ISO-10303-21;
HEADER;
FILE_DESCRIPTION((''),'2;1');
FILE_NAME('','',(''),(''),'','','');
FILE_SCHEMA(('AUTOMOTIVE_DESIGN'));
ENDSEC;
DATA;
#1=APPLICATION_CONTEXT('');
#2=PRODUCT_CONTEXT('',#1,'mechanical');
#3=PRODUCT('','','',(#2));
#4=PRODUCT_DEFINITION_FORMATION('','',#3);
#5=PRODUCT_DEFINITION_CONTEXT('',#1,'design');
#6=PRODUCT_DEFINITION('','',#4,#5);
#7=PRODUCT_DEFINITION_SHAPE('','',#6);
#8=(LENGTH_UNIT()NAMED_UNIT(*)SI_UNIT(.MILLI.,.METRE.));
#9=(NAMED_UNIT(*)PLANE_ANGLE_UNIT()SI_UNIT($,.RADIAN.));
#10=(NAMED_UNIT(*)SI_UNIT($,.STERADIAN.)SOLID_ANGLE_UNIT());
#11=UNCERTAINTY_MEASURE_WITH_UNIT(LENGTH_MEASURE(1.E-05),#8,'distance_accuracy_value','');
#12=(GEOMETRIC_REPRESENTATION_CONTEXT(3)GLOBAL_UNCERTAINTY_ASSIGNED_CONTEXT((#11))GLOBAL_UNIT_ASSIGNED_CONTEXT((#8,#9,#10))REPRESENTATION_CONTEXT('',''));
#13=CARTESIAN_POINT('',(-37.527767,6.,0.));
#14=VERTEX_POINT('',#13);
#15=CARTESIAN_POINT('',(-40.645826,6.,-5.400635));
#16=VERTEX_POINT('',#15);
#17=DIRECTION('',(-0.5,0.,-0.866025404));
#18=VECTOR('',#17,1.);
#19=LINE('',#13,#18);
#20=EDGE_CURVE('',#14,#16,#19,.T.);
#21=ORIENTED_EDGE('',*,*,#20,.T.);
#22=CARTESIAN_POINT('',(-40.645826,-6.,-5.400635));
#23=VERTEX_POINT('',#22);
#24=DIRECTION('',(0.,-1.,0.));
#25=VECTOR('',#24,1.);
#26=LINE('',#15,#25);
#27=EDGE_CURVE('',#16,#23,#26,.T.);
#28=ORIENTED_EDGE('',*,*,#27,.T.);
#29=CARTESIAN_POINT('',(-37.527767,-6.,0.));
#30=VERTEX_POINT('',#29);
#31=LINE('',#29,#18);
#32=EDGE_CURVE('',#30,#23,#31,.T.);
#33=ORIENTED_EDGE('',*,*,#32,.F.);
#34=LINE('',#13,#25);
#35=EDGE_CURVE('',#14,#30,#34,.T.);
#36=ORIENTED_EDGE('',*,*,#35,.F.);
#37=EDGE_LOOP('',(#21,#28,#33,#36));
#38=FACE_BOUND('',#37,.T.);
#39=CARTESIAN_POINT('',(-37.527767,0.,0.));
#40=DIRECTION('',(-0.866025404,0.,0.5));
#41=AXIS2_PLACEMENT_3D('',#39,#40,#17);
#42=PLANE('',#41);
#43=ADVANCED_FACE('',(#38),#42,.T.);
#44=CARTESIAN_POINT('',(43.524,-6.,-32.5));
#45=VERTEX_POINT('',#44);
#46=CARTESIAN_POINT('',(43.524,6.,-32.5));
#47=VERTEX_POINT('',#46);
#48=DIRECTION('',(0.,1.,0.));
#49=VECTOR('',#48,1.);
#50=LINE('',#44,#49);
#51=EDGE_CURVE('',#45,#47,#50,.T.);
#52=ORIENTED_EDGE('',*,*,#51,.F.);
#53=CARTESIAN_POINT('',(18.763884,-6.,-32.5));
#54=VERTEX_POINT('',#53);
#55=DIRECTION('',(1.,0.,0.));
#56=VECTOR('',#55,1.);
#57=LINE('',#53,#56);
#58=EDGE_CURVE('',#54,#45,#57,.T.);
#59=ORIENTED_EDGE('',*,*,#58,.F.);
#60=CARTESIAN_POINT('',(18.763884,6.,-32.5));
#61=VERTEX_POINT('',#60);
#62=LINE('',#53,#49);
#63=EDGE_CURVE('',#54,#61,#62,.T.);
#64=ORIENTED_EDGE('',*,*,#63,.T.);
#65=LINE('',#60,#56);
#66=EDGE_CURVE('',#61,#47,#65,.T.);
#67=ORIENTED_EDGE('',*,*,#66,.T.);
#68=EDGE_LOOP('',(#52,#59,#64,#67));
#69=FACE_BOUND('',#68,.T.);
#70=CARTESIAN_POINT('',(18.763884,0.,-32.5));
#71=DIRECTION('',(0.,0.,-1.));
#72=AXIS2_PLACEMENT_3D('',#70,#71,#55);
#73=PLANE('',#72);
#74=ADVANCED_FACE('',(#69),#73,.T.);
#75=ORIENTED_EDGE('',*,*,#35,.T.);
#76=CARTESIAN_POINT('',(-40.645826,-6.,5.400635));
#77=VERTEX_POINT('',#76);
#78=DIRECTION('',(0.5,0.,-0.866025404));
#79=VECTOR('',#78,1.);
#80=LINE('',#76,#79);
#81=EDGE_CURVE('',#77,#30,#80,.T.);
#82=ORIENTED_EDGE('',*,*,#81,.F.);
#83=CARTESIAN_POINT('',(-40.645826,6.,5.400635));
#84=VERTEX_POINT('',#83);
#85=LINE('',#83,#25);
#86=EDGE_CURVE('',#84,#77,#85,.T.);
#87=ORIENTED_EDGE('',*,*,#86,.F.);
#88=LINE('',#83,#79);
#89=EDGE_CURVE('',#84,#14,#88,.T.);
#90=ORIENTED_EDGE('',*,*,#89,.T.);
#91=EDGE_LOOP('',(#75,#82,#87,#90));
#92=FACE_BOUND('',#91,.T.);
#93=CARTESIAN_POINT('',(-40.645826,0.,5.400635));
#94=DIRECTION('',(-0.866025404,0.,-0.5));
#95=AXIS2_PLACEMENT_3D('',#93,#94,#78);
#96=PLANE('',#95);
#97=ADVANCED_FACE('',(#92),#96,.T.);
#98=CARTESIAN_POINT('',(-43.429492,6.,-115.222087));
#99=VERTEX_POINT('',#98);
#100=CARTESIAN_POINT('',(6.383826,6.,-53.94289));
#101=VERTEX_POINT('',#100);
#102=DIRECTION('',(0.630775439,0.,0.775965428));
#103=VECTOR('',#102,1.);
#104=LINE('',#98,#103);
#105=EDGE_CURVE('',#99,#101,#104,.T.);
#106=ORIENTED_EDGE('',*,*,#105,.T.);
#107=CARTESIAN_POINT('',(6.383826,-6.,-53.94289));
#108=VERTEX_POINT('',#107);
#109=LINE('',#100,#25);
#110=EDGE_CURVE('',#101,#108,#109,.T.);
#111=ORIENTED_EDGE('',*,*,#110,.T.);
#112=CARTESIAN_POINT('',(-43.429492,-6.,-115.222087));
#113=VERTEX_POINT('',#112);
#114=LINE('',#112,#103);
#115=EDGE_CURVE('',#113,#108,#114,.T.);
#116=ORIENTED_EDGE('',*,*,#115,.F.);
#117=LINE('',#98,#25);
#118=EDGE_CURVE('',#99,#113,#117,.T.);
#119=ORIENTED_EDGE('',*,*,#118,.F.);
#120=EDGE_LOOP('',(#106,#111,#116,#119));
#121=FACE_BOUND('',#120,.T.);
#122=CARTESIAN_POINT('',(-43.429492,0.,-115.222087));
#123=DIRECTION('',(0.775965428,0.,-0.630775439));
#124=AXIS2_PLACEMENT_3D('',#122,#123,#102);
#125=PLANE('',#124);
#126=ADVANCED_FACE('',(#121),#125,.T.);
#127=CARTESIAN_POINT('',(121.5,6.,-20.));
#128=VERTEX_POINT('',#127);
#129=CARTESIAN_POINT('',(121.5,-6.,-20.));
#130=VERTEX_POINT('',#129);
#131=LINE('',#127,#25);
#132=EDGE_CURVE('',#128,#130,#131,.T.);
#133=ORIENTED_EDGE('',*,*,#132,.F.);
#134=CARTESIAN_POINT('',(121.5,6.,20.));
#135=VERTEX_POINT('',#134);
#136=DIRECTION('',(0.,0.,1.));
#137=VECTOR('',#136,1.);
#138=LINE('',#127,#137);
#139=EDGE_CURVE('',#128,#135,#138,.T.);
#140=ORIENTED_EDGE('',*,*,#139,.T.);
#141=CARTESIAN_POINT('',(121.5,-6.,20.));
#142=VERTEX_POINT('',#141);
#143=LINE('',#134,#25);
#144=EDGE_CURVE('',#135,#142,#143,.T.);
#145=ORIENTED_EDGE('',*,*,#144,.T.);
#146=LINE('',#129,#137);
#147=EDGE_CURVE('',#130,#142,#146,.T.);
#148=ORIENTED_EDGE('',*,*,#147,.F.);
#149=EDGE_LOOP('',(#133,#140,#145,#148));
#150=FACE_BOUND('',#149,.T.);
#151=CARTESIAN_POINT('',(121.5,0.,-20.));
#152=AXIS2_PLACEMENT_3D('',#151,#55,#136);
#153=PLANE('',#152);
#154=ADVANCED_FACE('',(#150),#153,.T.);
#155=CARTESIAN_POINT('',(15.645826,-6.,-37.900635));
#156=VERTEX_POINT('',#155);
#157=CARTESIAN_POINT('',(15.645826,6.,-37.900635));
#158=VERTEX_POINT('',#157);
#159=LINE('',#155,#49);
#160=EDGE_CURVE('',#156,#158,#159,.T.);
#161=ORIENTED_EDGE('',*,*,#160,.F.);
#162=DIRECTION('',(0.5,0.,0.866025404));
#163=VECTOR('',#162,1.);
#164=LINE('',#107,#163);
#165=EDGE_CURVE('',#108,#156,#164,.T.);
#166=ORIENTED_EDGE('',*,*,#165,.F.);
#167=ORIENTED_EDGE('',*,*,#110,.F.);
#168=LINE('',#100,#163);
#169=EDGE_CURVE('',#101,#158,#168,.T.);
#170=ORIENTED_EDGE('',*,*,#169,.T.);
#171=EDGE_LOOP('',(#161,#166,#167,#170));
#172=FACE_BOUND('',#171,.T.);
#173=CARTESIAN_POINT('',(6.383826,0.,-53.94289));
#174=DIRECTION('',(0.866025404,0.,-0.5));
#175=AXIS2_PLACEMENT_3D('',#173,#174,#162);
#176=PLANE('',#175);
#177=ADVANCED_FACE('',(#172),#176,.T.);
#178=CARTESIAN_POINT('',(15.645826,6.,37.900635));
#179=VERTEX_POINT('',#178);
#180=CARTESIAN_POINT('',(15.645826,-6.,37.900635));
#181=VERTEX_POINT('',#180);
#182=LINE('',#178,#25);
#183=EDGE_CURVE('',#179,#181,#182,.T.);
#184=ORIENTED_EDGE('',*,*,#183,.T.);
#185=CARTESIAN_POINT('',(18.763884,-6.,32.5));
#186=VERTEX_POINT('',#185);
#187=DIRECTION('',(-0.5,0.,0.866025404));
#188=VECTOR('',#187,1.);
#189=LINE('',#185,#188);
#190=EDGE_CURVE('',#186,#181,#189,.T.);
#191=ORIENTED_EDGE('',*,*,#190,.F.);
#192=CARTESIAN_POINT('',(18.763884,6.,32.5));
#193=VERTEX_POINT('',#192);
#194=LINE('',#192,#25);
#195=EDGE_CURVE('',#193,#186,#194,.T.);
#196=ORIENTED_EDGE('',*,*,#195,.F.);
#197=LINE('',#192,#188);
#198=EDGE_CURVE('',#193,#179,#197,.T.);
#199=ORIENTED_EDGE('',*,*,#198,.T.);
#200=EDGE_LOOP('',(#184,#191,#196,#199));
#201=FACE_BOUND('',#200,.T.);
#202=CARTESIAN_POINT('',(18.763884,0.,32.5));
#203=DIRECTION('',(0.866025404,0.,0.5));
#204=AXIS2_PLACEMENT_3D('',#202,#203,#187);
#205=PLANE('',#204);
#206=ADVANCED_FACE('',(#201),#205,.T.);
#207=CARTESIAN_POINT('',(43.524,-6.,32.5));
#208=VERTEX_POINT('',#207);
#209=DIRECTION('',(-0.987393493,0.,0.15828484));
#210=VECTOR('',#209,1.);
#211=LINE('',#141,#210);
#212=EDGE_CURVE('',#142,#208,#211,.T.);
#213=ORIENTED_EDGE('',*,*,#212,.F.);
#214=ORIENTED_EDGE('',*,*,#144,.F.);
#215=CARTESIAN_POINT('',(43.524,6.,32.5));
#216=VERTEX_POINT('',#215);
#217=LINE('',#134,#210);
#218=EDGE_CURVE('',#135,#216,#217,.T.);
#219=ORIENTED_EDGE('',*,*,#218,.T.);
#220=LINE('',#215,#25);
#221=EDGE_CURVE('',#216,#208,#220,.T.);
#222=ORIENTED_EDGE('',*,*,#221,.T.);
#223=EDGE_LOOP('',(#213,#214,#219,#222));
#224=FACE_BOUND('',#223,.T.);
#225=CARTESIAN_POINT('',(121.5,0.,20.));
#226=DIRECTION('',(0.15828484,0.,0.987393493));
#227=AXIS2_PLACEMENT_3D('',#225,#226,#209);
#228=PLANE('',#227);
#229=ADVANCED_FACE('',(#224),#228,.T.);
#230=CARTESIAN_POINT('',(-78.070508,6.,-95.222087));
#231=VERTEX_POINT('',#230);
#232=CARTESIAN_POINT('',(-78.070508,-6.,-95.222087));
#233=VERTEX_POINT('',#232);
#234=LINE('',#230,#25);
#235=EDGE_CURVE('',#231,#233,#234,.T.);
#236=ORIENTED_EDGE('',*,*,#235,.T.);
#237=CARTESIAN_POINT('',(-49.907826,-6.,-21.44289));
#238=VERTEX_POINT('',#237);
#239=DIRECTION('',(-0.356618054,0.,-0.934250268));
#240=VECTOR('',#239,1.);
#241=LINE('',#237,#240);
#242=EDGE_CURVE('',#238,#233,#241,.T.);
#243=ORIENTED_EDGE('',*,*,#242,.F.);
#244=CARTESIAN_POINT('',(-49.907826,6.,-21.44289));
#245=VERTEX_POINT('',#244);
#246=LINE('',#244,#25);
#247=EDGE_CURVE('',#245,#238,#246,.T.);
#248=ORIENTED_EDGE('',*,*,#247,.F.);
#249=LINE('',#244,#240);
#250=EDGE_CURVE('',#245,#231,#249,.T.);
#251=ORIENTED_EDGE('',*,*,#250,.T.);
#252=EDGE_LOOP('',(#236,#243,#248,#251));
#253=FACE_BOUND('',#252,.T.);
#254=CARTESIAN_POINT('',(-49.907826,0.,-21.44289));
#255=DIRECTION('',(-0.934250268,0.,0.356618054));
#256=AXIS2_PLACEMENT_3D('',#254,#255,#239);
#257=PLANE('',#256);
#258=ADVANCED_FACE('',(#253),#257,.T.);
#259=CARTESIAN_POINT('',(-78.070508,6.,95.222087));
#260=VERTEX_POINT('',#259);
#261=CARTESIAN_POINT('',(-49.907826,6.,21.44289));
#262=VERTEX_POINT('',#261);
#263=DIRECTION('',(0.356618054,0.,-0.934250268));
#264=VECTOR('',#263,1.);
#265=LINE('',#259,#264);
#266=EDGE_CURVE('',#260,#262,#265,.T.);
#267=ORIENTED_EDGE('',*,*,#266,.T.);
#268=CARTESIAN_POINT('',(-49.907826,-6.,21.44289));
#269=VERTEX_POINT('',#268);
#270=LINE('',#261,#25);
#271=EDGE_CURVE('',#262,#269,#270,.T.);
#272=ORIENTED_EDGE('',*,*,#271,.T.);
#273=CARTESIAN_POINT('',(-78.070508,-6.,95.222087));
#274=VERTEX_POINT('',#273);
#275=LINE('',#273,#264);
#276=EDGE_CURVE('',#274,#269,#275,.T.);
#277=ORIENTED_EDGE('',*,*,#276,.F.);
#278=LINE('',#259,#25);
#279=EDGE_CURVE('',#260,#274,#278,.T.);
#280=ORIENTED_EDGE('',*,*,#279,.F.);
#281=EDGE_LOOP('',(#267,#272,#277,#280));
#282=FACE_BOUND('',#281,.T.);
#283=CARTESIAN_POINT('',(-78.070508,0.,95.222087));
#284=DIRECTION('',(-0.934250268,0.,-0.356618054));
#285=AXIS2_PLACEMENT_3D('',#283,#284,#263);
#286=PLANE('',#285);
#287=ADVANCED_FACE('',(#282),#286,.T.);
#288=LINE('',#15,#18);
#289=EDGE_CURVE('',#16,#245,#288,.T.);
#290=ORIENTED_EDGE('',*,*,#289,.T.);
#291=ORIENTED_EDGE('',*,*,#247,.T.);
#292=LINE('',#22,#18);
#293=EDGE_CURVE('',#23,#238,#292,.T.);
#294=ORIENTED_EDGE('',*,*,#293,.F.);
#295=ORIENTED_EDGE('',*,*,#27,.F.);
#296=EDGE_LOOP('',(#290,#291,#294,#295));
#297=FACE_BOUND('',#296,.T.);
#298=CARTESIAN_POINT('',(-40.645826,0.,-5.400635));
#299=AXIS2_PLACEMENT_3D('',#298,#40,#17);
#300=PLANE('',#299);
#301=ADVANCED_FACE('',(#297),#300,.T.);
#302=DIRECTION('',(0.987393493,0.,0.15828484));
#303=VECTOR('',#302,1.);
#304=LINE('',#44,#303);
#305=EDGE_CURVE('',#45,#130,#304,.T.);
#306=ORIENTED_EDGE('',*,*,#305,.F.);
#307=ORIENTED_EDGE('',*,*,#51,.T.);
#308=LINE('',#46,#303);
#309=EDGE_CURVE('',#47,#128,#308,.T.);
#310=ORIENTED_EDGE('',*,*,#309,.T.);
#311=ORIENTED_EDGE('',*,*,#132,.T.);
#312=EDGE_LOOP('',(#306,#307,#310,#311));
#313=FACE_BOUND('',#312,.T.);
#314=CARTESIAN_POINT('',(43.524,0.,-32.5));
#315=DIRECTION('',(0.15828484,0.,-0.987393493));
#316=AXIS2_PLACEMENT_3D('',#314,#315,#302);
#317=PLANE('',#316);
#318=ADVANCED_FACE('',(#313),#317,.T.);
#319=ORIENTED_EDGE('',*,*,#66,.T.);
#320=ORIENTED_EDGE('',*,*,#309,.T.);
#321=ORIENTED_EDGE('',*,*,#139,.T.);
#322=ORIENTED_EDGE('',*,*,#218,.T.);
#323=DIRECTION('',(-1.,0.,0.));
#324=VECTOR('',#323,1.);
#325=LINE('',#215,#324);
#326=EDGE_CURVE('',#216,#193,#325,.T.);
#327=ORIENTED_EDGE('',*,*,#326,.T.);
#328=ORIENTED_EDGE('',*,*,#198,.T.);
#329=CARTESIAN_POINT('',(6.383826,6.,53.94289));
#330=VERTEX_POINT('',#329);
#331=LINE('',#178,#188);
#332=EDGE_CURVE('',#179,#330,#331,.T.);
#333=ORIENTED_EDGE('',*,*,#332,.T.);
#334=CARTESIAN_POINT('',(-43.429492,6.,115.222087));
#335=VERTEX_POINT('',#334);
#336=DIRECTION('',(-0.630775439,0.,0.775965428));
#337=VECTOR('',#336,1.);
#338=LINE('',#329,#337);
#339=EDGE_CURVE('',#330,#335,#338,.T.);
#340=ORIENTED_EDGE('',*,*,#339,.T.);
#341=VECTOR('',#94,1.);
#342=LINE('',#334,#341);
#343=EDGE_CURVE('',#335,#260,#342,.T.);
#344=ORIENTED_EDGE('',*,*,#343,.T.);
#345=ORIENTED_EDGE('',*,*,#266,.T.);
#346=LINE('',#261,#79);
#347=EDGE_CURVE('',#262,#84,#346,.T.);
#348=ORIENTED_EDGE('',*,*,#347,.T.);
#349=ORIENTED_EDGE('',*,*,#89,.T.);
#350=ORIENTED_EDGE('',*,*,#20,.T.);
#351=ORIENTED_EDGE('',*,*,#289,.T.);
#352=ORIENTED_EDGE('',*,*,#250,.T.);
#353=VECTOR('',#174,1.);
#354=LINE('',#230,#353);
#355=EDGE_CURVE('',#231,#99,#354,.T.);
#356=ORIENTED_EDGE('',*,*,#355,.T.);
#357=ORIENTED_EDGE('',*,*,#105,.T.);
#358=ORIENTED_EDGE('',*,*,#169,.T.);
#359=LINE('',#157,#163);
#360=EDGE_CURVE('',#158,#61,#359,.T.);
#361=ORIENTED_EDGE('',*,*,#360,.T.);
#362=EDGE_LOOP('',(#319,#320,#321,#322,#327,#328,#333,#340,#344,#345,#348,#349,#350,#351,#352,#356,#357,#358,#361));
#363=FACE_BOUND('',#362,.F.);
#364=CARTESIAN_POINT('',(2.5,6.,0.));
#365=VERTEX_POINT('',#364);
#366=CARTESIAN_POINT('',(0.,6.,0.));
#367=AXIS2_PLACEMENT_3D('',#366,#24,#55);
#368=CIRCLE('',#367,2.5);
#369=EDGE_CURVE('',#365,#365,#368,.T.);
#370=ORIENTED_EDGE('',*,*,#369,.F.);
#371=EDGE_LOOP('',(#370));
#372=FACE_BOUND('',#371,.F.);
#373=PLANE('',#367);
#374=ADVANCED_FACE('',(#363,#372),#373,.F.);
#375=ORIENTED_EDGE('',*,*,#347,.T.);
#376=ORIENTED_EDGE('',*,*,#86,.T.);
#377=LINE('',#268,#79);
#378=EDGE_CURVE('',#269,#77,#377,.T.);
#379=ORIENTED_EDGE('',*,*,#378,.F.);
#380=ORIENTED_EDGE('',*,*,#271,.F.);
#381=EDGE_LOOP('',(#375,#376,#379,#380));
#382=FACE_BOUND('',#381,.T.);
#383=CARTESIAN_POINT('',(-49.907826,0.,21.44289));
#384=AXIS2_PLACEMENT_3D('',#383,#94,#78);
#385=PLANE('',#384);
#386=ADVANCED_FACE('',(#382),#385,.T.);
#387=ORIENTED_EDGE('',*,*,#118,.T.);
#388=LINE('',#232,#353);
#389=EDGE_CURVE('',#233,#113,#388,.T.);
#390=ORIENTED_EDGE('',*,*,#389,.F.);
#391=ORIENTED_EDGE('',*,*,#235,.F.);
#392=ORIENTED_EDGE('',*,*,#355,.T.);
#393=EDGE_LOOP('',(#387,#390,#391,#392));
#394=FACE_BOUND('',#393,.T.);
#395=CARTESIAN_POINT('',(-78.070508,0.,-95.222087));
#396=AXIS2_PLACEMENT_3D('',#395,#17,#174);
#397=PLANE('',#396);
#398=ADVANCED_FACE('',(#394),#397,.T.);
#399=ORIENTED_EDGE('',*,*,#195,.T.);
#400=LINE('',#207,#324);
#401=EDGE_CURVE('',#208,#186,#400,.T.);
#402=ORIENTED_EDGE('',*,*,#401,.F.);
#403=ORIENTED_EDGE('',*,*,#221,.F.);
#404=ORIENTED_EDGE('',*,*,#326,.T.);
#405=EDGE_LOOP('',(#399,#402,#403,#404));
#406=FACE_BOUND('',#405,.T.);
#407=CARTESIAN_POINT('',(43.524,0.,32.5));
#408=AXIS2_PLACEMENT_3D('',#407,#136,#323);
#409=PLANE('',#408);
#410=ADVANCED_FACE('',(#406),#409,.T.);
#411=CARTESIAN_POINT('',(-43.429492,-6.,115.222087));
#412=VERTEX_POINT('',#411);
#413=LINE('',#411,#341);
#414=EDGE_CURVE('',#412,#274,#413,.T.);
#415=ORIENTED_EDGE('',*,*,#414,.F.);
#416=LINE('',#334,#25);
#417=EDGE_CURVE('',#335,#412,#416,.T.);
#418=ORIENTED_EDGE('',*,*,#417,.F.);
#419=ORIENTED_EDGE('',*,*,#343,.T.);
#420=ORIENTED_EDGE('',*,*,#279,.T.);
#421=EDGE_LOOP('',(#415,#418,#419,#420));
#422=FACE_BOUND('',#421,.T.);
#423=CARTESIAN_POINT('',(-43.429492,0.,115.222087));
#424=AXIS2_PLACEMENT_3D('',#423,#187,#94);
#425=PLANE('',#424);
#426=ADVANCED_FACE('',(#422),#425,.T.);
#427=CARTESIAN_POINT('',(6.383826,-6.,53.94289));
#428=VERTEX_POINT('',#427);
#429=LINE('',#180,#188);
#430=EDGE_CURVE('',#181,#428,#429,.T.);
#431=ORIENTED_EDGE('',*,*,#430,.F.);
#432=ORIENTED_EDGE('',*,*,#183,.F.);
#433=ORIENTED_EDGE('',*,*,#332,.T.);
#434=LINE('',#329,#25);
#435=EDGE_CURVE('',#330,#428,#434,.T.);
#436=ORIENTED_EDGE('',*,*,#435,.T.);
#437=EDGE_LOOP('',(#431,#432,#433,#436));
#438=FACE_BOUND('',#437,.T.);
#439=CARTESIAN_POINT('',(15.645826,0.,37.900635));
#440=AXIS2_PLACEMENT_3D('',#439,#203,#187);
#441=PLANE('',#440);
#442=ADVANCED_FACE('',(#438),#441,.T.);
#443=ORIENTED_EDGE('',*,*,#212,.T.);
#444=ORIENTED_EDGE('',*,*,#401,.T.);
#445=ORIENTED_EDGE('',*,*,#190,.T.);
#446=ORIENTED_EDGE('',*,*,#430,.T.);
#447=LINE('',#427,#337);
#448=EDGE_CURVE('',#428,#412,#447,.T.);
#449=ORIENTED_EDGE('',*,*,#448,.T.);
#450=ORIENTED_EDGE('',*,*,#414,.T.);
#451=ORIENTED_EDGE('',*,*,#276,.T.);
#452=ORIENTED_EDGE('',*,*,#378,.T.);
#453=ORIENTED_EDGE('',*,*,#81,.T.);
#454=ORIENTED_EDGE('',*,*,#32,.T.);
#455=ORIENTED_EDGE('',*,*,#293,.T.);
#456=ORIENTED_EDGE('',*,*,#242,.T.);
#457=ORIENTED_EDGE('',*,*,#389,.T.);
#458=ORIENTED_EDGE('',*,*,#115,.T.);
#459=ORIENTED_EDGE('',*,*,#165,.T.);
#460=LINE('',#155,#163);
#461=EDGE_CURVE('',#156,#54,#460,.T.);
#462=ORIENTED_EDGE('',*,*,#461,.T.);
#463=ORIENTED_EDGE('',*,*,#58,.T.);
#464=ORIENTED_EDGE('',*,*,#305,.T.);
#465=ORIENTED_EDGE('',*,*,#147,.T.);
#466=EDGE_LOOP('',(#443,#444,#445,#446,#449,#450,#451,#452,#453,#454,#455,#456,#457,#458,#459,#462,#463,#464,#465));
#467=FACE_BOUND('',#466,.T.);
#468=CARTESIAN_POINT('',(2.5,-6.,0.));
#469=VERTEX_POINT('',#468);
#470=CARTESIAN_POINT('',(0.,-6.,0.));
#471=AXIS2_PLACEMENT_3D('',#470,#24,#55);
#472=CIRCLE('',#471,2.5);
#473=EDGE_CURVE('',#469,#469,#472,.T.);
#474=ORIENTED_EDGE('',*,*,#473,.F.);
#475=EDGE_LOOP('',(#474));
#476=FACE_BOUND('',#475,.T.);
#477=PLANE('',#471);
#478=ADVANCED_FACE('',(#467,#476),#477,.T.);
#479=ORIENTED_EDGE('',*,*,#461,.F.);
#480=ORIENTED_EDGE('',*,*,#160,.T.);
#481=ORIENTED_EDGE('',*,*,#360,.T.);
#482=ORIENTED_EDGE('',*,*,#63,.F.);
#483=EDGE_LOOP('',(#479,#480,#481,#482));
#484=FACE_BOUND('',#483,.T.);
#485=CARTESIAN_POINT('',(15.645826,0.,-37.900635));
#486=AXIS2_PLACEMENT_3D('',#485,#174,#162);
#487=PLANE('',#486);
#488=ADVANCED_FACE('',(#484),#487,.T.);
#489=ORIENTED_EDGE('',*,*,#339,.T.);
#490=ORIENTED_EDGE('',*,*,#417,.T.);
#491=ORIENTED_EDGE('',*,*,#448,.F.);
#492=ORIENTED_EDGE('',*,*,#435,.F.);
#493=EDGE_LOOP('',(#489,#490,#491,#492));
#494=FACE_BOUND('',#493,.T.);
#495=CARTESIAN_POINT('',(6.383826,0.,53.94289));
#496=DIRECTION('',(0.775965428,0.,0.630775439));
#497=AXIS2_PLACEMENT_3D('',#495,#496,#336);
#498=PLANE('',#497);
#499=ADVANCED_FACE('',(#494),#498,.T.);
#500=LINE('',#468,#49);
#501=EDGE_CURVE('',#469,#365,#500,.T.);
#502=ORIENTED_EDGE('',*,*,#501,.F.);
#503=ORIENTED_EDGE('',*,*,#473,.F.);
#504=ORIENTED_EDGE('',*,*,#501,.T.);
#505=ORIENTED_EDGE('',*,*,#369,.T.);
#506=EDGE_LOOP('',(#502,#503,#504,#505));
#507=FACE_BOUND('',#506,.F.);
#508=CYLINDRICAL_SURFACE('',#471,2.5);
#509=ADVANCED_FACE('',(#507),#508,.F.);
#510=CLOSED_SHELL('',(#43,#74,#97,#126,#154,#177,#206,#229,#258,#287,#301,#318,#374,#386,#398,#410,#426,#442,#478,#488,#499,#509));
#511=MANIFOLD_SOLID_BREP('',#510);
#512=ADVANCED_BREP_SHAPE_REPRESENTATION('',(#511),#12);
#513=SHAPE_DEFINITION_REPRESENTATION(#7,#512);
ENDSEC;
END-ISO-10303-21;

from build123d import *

# Parameters (mm, degrees)
F1_DEPTH = 6
F2_R     = 2.5
F3_DEPTH = 12.001


# Not quite as in the source:
# - a feature names something its author has since deleted; it is built from what else it names


with BuildPart() as f1:
    # F0 (on Front) → F1 (new body, symmetric)
    with BuildSketch(Plane.XZ):
        Polygon((43.524, -32.5), (121.5, -20), (121.5, 20), (43.524, 32.5), (25, 32.5), (18.7638837487, 32.5), (15.645825623, 37.9006350946), (6.383825623, 53.9428896743), (-43.4294919243, 115.2220865598), (-78.0705080757, 95.2220865598), (-49.907825623, 21.4428896743), (-40.645825623, 5.4006350946), (-37.5277674973, 0), (-40.645825623, -5.4006350946), (-49.907825623, -21.4428896743), (-78.0705080757, -95.2220865598), (-43.4294919243, -115.2220865598), (6.383825623, -53.9428896743), (15.645825623, -37.9006350946), (18.7638837487, -32.5), (25, -32.5), align=None)
    extrude(amount=F1_DEPTH, both=True)

    # F2 (on face) → F3 (cut, through all)
    with BuildSketch(Plane.XZ.offset(6)):
        Circle(F2_R)
    extrude(amount=-F3_DEPTH, mode=Mode.SUBTRACT)


solid = f1.part
